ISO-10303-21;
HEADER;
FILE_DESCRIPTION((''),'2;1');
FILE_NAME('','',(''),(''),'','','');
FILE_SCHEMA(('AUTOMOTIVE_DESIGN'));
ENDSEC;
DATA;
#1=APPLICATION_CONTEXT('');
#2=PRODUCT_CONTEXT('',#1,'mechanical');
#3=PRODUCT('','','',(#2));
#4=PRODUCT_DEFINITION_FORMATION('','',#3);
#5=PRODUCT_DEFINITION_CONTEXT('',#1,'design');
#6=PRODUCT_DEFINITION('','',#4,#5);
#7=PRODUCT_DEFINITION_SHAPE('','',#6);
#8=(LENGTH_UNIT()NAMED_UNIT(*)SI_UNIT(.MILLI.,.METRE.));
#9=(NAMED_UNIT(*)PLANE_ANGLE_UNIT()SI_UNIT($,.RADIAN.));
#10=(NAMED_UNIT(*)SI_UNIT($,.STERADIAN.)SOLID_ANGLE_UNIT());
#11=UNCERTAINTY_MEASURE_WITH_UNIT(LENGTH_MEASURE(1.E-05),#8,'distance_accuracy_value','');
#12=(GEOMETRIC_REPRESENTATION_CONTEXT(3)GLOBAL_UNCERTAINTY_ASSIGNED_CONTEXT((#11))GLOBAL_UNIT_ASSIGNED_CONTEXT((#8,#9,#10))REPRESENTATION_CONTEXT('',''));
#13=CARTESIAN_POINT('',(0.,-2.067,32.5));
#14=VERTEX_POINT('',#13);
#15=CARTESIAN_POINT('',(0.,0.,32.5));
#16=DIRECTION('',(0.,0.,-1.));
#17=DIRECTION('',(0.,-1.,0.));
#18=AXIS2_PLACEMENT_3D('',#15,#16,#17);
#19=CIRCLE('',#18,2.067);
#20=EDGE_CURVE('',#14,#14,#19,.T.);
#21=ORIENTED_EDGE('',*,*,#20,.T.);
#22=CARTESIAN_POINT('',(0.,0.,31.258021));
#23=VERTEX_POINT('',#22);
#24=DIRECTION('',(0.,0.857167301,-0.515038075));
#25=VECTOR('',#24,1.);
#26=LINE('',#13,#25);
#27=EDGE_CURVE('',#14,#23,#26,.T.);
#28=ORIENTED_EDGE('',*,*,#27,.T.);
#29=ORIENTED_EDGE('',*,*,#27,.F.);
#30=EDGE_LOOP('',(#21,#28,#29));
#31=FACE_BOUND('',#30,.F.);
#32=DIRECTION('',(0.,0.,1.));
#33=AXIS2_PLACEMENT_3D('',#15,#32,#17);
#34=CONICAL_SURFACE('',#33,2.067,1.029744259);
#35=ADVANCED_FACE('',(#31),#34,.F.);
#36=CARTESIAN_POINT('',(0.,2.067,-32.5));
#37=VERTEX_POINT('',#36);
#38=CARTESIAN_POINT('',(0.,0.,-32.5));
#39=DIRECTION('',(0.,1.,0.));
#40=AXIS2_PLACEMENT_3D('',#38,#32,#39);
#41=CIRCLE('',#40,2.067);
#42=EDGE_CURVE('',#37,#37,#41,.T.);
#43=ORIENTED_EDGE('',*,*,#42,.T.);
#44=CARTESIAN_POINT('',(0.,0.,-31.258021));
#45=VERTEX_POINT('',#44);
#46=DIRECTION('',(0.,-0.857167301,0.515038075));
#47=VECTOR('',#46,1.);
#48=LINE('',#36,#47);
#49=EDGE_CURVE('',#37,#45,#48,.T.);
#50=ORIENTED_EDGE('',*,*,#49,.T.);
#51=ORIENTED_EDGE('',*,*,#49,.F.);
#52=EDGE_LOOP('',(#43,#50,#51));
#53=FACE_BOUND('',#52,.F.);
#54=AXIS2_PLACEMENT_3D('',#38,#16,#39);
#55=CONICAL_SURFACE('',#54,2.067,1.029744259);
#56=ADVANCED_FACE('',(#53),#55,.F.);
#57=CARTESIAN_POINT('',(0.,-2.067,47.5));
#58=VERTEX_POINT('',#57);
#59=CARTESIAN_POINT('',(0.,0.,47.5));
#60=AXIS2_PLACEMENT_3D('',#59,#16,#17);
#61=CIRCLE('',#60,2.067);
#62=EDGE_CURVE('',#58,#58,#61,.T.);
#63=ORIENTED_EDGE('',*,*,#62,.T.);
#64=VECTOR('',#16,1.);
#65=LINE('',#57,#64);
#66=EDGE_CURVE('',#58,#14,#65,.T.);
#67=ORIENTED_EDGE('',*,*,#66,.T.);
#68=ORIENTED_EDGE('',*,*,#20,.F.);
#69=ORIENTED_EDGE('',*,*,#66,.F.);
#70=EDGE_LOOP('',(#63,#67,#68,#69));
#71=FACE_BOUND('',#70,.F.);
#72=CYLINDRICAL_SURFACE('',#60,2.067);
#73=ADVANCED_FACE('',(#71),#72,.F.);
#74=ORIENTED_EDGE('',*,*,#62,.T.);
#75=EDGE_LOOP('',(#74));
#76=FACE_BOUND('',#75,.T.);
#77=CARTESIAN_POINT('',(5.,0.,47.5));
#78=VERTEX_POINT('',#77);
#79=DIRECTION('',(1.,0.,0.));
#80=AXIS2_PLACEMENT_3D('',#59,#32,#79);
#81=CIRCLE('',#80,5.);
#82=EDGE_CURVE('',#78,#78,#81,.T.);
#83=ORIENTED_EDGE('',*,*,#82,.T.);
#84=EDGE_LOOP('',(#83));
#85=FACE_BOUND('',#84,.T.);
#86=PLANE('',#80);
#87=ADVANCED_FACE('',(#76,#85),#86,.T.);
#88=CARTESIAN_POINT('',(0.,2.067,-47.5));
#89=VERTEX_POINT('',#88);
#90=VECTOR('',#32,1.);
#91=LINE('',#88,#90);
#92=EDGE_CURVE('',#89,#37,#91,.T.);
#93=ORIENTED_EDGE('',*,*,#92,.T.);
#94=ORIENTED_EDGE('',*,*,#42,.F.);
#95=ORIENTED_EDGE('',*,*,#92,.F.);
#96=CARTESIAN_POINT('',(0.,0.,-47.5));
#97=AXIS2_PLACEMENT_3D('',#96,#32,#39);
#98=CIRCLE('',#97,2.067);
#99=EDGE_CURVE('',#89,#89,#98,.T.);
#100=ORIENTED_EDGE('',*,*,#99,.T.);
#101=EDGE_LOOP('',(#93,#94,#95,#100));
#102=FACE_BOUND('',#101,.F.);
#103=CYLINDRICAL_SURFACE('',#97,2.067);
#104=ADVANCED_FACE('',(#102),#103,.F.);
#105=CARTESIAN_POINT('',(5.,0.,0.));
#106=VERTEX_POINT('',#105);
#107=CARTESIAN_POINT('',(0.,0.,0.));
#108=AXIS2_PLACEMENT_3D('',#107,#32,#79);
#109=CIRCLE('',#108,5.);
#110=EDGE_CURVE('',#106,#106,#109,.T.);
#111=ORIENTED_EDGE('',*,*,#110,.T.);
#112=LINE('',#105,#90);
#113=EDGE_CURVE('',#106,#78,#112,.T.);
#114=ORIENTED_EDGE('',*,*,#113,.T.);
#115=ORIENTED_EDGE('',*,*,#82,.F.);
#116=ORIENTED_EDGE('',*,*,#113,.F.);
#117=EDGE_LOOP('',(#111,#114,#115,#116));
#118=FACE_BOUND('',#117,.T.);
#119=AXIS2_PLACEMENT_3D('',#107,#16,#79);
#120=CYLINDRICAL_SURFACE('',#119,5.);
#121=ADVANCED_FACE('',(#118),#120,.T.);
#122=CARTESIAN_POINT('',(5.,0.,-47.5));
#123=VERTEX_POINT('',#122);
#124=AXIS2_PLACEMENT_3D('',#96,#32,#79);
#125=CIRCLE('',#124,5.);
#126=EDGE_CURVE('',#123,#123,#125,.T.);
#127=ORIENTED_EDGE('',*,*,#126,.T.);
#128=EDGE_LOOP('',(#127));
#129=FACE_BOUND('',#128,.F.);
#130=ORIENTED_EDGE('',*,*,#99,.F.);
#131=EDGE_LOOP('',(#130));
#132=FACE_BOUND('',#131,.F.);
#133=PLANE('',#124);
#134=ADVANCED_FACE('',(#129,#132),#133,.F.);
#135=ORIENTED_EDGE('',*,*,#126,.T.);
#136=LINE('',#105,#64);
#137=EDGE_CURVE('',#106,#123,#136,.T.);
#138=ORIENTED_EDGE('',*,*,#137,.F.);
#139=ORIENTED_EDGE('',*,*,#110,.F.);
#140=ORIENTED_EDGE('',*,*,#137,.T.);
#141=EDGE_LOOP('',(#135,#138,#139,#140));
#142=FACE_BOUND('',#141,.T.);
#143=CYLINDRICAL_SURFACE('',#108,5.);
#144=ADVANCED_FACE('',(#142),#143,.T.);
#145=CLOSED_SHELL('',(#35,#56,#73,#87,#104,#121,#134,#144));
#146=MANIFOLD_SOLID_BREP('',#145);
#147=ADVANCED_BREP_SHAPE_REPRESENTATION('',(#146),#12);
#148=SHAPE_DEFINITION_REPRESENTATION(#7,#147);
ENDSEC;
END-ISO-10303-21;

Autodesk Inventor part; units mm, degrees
ref_plane "YZ Plane" through (0, 0, 0) normal (1, 0, 0) x (0, 1, 0)
ref_plane "XZ Plane" through (0, 0, 0) normal (0, 1, 0) x (-1, 0, 0)
ref_plane "XY Plane" through (0, 0, 0) normal (0, 0, 1) x (1, 0, 0)
sketch "Boceto1" plane through (0, 0, 0) normal (0, 0, 1) x (1, 0, 0)
  circle A0 centre (0, 0) radius 5
  dimension "d0" = 10
extrude "Cuerpo manija" add sketch "Boceto1" along normal mid plane 95
sketch "Boceto2" plane through (0, 0, 47.5) normal (0, 0, 1) x (1, 0, 0)
  circle A0 centre (0, 0) radius 5 projected
hole "M5X0.7 15" at (0, 0, 47.5) direction (0, 0, -1) diameter 4.134 depth 15 tip angle 118 thread size "M5x0.8" class "6H" standard "ISO Metric profile"
sketch "Boceto3" plane through (0, 0, -47.5) normal (0, 0, -1) x (-1, 0, 0)
  point P0 (0, 0)
  point P1 (0, 0)
hole "M%X0.7 P15" at (0, 0, -47.5) direction (0, 0, 1) diameter 4.134 depth 15 tip angle 118 thread size "M5x0.8" class "6H" standard "ISO Metric profile"
properties part number "eje"
